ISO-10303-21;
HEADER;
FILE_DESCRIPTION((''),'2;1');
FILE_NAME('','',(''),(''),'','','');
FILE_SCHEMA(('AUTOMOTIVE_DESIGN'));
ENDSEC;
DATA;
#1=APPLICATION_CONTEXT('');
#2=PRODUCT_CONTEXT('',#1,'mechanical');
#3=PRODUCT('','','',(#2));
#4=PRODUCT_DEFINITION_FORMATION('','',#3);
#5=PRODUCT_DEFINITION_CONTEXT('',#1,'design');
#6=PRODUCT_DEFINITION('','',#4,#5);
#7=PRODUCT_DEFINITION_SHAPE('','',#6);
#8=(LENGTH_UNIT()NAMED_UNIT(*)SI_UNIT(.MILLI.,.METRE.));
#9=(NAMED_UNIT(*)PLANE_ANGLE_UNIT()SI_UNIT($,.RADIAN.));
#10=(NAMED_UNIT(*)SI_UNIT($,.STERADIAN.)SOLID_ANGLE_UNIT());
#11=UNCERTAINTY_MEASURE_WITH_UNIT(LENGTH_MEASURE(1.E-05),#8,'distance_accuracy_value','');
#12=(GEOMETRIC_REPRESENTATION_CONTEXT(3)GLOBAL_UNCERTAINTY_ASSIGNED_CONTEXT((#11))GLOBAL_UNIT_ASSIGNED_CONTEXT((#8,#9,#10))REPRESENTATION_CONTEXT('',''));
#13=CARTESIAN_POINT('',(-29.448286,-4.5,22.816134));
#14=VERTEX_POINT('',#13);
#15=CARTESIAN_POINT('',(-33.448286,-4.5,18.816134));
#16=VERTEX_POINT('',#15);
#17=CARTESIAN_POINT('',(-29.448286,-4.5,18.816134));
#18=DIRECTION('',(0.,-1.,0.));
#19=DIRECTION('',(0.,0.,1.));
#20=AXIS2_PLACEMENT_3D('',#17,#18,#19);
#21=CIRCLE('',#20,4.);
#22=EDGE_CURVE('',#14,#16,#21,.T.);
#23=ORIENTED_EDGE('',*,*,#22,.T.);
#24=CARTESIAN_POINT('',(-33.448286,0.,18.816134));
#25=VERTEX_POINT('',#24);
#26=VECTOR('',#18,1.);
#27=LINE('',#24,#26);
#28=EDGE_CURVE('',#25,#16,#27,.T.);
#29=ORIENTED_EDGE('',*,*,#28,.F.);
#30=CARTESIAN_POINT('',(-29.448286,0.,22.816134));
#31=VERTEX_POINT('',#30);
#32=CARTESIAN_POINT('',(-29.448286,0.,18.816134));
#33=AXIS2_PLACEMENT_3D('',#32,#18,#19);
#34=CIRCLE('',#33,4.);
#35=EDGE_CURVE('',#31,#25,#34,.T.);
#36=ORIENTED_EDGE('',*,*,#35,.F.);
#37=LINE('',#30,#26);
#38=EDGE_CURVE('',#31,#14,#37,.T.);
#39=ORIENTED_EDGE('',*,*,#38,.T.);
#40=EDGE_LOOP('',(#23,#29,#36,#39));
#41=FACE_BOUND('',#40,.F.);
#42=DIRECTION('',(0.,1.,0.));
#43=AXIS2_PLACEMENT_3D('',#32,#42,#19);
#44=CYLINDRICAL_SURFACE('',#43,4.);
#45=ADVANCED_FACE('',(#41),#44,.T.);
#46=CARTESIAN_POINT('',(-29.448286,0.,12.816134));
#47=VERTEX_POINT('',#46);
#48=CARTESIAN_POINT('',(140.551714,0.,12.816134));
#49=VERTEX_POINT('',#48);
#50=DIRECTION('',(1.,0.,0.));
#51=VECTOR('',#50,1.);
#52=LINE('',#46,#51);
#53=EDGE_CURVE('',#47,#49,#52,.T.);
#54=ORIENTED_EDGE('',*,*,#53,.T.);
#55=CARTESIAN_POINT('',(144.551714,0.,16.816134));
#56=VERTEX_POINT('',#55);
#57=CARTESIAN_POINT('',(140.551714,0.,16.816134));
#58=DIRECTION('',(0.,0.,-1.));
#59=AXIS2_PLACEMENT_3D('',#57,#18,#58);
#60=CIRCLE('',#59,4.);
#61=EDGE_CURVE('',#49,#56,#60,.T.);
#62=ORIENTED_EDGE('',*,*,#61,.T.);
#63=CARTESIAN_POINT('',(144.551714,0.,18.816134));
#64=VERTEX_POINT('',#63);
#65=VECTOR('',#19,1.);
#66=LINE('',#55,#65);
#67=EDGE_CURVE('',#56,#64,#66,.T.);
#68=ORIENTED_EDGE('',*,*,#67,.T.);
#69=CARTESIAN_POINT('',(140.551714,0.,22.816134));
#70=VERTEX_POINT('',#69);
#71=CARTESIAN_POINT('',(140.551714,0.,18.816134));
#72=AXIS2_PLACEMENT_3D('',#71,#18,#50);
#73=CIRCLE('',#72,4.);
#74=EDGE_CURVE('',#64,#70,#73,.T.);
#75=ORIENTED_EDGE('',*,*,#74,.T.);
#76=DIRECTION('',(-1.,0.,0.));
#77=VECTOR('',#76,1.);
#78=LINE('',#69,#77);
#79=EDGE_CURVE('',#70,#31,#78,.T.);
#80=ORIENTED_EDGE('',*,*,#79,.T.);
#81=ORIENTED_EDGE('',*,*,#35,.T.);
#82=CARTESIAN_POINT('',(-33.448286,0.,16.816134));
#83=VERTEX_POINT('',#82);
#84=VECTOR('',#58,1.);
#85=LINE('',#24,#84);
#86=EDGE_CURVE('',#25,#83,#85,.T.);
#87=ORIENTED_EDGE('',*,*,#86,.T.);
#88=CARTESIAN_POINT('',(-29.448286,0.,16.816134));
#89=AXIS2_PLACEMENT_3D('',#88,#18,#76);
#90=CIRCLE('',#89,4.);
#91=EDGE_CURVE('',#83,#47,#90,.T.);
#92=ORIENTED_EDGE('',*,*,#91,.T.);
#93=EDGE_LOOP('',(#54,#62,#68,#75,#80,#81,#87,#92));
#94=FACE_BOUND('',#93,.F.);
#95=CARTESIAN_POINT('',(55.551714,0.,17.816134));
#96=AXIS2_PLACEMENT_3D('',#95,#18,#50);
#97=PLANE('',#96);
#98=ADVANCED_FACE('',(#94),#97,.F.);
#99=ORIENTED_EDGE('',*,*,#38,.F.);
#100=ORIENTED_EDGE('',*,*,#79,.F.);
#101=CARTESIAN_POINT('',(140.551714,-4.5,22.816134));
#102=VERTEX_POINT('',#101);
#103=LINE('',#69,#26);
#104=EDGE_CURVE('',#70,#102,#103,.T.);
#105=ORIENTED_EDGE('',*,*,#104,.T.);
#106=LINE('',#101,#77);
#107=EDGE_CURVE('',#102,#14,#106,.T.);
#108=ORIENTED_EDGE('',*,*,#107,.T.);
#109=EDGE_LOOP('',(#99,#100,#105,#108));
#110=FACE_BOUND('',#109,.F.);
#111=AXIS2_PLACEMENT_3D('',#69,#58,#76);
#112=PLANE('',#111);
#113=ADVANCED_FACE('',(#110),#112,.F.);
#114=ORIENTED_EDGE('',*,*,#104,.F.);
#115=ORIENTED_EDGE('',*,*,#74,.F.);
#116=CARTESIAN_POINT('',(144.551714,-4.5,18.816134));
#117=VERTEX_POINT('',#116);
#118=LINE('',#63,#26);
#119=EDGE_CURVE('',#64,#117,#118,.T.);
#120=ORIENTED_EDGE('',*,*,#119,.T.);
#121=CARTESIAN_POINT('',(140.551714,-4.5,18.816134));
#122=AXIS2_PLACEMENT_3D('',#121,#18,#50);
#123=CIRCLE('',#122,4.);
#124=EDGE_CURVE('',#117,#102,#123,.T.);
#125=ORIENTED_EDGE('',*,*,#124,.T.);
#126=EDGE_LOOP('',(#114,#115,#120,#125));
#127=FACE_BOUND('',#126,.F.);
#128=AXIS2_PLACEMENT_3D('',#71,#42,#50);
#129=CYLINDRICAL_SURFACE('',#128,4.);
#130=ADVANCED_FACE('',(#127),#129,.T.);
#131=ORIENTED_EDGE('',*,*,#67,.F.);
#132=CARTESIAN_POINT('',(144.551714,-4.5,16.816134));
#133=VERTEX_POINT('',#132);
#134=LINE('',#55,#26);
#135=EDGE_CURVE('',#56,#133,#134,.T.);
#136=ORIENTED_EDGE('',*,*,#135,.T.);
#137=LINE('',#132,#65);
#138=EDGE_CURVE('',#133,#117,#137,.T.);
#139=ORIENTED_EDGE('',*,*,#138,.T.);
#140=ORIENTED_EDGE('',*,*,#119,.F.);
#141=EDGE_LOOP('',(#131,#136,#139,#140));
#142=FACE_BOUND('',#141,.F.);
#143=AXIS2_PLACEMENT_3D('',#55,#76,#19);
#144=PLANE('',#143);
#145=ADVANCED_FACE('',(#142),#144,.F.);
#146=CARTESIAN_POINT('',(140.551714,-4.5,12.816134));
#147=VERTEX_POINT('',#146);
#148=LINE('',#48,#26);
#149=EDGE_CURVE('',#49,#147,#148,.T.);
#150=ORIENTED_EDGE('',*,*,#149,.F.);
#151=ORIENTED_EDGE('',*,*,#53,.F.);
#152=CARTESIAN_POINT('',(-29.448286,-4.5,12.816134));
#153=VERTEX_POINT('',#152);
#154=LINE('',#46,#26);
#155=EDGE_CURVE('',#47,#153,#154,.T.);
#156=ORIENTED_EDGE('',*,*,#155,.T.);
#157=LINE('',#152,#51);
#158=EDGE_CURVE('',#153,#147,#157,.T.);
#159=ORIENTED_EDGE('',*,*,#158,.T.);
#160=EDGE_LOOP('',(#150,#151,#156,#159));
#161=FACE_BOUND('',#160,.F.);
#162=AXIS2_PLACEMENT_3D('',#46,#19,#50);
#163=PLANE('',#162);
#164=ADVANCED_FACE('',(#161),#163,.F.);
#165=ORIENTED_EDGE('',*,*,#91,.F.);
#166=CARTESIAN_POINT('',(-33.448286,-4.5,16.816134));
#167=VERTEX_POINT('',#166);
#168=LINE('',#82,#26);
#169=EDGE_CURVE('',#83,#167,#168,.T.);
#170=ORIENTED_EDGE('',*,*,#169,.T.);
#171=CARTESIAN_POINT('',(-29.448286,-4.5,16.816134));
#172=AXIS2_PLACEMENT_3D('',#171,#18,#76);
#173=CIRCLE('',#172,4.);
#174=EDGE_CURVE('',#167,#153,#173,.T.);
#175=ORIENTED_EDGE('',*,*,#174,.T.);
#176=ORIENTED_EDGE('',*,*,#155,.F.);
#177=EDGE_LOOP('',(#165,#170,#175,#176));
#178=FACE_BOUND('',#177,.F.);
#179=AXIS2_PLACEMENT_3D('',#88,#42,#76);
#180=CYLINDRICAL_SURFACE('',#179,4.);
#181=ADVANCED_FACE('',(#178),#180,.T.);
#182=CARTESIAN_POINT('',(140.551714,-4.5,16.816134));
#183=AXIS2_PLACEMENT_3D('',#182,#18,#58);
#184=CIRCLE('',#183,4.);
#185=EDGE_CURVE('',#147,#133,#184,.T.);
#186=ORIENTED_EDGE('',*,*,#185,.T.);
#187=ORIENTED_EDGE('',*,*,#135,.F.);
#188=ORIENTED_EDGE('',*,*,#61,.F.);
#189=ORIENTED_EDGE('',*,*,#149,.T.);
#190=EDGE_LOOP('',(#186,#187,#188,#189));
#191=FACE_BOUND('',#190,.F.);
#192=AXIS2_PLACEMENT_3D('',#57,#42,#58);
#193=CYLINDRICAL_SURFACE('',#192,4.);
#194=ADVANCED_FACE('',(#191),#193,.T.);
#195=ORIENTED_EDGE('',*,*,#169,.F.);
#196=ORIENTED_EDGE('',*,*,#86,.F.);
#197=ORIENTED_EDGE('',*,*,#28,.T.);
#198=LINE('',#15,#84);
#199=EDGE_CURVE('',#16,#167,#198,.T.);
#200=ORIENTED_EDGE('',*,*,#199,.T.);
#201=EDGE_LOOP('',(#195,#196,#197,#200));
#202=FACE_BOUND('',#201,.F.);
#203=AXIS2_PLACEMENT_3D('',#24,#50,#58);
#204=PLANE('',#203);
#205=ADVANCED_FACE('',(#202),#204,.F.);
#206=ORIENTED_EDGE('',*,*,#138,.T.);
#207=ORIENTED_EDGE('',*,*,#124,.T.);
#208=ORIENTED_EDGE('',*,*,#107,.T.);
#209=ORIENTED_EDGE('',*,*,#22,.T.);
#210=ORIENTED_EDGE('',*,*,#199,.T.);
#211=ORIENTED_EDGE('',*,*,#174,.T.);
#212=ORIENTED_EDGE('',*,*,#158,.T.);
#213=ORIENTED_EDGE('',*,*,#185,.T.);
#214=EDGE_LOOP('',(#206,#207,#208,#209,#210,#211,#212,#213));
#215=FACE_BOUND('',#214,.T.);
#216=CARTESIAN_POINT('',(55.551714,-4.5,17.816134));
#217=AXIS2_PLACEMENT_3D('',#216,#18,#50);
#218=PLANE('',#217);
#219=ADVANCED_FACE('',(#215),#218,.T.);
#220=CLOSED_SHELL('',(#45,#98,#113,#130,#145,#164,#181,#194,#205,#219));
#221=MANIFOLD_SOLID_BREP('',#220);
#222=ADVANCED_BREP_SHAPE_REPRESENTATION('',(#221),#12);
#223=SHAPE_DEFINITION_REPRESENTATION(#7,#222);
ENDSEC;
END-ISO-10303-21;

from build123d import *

# Parameters (mm, degrees)
F1_DEPTH = 4.5


# Not quite as in the source:
# - a feature names something its author has since deleted; it is built from what else it names


with BuildPart() as f1:
    # F0 (on Front) → F1 (new body)
    with BuildSketch(Plane.XZ):
        with BuildLine():
            Line((140.551713574, 22.8161337823), (-29.448286426, 22.8161337823))
            ThreePointArc((-29.448286426, 22.8161337823), (-32.2767135507, 21.6445609071), (-33.448286426, 18.8161337823))
            Line((-33.448286426, 18.8161337823), (-33.448286426, 16.8161337823))
            ThreePointArc((-33.448286426, 16.8161337823), (-32.2767135507, 13.9877066576), (-29.448286426, 12.8161337823))
            Line((-29.448286426, 12.8161337823), (140.551713574, 12.8161337823))
            ThreePointArc((140.551713574, 12.8161337823), (143.3801406988, 13.9877066576), (144.551713574, 16.8161337823))
            Line((144.551713574, 16.8161337823), (144.551713574, 18.8161337823))
            ThreePointArc((144.551713574, 18.8161337823), (143.3801406988, 21.6445609071), (140.551713574, 22.8161337823))
        make_face()
    extrude(amount=F1_DEPTH)


solid = f1.part
